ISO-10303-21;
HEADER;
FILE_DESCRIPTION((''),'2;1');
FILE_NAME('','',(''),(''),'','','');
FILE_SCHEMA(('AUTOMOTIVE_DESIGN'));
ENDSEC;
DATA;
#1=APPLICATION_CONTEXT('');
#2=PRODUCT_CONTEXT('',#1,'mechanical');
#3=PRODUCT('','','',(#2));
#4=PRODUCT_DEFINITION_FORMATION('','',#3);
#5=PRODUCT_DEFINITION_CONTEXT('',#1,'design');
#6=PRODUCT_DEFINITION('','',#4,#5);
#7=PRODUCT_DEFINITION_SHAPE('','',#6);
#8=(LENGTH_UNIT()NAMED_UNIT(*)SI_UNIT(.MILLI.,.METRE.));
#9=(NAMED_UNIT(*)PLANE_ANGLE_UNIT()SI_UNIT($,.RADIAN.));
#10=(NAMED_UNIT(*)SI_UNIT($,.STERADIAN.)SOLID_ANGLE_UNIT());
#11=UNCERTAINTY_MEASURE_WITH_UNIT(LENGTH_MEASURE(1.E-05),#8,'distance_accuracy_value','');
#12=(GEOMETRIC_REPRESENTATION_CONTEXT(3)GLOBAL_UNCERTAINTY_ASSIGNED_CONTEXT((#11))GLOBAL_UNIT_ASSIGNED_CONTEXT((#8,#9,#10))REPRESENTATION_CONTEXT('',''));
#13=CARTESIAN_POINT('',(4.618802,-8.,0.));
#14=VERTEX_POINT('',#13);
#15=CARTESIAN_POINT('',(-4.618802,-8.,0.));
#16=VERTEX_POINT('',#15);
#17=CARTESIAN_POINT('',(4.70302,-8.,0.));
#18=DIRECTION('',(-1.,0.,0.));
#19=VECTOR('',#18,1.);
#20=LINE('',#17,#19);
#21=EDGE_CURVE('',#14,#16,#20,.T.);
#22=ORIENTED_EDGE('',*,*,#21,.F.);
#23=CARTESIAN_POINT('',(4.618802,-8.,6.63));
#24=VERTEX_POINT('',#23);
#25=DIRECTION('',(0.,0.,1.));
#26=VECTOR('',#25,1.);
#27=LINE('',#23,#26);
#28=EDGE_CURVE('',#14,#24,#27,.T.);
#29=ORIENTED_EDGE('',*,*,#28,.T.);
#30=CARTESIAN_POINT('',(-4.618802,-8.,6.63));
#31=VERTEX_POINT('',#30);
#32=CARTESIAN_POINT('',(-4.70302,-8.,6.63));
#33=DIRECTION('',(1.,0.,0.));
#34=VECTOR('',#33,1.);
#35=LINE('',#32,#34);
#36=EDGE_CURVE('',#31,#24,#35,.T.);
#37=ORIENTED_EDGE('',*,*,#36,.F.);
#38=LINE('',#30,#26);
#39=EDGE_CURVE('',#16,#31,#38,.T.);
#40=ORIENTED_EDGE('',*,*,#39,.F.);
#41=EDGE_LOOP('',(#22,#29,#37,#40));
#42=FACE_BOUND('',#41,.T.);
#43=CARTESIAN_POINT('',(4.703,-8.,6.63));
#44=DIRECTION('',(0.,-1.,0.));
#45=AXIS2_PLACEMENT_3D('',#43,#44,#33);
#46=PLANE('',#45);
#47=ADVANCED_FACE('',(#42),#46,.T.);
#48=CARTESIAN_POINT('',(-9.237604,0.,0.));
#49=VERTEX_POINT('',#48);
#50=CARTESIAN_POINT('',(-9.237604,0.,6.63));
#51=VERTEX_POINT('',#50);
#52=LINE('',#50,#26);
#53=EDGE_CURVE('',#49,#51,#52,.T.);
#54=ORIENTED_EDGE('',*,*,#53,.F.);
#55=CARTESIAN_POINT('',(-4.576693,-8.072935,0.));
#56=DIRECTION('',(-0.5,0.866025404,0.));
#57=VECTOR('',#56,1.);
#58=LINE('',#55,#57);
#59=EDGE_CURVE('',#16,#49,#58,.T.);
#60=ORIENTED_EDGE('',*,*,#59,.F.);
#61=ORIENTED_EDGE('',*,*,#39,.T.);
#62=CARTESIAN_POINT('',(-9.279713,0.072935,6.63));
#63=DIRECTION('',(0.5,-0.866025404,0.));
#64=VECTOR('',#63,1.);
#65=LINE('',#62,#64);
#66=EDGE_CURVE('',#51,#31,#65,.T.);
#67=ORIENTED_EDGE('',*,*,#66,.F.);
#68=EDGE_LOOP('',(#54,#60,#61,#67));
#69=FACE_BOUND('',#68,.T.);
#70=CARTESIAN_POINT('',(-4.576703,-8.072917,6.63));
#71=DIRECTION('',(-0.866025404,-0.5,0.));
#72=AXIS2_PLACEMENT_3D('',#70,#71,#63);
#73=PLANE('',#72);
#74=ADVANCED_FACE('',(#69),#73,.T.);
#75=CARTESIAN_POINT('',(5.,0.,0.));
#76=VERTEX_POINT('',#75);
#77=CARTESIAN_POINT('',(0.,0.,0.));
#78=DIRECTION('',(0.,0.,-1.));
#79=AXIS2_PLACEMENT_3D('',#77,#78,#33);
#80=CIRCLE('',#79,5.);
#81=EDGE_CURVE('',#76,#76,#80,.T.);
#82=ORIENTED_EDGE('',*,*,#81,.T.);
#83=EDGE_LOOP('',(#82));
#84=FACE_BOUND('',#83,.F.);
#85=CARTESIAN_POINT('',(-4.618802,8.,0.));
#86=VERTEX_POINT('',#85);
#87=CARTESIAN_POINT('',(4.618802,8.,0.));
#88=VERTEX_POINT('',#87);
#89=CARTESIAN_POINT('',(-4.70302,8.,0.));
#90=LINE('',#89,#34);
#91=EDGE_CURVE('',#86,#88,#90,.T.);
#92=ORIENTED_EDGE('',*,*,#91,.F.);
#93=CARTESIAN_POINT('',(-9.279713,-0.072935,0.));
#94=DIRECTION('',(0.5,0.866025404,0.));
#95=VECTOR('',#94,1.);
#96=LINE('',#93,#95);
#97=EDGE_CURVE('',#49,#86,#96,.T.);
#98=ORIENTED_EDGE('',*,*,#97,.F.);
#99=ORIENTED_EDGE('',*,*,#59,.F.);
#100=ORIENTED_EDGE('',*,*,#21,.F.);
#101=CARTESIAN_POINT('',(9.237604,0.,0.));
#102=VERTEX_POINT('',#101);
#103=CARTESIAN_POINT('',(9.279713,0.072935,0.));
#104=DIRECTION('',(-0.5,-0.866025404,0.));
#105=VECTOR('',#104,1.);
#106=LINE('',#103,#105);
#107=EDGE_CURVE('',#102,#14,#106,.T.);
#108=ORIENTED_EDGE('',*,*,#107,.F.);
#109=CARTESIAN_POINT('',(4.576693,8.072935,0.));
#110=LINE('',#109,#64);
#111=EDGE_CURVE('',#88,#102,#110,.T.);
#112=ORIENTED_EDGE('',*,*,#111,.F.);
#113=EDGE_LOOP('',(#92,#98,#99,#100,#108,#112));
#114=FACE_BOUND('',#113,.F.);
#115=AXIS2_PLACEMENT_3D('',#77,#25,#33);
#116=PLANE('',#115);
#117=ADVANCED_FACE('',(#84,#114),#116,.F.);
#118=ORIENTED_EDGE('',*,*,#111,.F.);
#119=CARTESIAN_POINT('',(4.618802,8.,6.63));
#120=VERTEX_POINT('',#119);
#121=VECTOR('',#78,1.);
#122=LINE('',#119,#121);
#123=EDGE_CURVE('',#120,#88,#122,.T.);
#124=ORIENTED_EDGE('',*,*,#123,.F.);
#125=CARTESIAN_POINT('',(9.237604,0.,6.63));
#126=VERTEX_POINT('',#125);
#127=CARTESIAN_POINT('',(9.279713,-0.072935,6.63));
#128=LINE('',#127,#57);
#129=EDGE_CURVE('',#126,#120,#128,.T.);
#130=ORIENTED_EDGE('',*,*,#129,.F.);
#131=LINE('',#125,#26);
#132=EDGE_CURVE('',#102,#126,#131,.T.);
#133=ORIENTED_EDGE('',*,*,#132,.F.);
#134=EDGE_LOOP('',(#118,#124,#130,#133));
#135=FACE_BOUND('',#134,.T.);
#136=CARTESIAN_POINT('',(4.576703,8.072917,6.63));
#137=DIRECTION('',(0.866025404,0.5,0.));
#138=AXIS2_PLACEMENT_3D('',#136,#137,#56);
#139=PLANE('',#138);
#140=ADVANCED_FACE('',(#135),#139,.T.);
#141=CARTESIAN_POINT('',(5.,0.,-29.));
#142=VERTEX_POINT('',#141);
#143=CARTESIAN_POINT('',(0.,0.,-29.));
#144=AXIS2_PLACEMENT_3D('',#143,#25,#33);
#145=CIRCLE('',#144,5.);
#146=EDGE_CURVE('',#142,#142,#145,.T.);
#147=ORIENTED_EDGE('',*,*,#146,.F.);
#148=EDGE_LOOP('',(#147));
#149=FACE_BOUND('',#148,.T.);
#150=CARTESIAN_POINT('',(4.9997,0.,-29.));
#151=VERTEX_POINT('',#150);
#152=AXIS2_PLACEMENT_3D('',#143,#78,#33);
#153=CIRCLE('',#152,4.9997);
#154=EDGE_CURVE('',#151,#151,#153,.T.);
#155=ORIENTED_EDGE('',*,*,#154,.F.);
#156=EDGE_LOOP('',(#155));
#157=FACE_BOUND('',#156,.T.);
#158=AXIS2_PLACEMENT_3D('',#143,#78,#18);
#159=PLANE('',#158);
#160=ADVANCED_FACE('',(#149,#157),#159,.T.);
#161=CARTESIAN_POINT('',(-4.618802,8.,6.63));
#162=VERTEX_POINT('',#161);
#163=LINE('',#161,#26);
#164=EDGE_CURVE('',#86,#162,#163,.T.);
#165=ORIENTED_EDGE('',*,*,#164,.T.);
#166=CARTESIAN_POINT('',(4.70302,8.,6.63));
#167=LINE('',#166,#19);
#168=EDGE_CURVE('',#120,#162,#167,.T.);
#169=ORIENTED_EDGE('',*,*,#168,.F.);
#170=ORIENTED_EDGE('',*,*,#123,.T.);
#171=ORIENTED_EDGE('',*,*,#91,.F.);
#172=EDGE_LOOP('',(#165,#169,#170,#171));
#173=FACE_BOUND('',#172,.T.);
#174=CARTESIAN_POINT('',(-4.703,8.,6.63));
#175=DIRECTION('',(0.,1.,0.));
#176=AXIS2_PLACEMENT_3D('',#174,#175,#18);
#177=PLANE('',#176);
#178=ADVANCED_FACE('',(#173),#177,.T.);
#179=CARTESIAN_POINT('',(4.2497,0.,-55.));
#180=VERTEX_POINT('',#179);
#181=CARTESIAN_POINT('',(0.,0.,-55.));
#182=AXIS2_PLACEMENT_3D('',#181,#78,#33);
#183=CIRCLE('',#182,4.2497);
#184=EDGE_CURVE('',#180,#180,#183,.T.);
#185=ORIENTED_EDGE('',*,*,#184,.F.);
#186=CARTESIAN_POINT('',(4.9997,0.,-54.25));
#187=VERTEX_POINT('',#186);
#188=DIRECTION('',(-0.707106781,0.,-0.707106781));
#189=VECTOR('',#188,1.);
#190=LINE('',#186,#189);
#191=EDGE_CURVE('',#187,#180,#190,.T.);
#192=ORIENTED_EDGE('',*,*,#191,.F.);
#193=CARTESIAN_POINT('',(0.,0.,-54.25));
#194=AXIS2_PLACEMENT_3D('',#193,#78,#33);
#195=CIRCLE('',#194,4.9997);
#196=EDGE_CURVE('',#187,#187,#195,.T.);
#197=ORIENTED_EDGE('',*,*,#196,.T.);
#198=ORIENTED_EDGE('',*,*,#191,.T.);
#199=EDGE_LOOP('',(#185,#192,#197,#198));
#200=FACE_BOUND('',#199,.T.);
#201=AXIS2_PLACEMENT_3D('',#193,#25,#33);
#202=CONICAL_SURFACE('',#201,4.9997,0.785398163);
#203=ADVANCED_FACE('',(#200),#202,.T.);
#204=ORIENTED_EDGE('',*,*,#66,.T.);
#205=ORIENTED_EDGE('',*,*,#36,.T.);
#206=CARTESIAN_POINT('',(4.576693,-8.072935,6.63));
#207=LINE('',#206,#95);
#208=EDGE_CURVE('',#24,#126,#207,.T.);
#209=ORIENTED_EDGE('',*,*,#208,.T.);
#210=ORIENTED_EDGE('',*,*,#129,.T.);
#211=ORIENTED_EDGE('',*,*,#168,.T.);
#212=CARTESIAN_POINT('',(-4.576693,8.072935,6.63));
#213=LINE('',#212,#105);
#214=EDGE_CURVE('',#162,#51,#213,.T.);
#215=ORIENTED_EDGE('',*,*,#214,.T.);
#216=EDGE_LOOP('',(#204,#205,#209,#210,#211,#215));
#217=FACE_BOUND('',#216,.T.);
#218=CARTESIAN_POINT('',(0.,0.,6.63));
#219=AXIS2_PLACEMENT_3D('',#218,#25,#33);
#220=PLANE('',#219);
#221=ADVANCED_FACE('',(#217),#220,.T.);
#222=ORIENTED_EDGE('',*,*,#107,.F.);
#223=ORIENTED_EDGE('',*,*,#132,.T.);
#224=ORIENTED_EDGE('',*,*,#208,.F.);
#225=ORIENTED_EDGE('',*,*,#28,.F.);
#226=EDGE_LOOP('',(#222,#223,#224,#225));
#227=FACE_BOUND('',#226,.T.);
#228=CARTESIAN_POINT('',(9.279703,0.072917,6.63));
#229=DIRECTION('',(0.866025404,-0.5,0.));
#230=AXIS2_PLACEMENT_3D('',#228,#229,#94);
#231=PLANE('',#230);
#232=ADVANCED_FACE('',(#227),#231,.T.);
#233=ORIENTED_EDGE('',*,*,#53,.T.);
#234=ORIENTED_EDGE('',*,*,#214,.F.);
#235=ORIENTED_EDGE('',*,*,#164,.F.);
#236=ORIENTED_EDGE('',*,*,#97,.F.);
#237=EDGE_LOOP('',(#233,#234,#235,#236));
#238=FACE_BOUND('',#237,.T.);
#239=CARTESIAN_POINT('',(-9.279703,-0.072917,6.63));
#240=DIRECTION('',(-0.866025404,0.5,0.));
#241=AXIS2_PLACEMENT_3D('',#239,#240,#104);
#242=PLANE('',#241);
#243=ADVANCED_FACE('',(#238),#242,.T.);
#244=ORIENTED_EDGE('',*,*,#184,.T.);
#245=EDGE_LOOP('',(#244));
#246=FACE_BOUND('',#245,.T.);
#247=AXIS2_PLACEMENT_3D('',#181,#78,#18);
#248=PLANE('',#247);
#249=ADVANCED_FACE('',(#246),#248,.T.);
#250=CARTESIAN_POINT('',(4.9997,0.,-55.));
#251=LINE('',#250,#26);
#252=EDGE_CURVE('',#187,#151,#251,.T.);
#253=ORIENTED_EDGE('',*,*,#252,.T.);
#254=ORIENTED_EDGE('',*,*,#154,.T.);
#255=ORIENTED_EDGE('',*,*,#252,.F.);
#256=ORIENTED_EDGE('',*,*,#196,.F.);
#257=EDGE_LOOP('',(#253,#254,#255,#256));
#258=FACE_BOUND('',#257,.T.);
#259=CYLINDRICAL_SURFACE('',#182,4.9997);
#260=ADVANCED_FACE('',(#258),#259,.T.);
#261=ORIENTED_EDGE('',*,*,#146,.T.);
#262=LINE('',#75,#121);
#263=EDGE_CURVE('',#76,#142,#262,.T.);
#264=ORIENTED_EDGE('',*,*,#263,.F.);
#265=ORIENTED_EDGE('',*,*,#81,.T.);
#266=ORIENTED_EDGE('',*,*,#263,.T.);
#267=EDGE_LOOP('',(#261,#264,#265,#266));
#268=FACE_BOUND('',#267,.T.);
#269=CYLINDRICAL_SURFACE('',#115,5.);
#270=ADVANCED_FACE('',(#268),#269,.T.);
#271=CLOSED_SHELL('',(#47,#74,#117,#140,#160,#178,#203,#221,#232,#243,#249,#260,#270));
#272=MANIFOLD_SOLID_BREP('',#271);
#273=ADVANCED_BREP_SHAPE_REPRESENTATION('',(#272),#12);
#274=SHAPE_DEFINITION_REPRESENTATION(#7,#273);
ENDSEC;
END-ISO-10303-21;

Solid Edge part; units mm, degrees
sketch "Sketch1" plane through (0, 0, 0) normal (0, 0, 1) x (1, 0, 0)
  circle A0 centre (0, 0) radius 9.28
  dimension "D1" = 18.56
extrude "Protrusion1" add sketch "Sketch1" along normal blind 6.63
sketch "Sketch2" plane through (0, 0, 0) normal (0, 0, -1) x (1, 0, 0)
  circle A0 centre (0, 0) radius 5
extrude "Protrusion2" add sketch "Sketch2" along normal blind 55
sketch "Sketch3" plane through (0, 0, -55) normal (0, 0, -1) x (1, 0, 0)
  circle A0 centre (0, 0) radius 4.9997
extrude "Cutout1" cut sketch "Sketch3" against normal blind 26 flip side to cut
chamfer "Chamfer_1" distance 0.75 angle 45 1 edges at (-4.9997, 0, -55)
sketch "Sketch4" plane through (0, 0, 6.63) normal (0, 0, 1) x (1, 0, 0)
  line L0 (-4.703, 8) -> (4.703, 8)
  dimension "D1" = 16
extrude "Cutout2" cut sketch "Sketch4" against normal up to next material side at (0, 8.05, 6.63)
pattern_circular "Pattern1" count 6 over 360 about axis through (0, 0, 6.63) along (0, 0, 1) of "Cutout2"
properties part number "24104612"
